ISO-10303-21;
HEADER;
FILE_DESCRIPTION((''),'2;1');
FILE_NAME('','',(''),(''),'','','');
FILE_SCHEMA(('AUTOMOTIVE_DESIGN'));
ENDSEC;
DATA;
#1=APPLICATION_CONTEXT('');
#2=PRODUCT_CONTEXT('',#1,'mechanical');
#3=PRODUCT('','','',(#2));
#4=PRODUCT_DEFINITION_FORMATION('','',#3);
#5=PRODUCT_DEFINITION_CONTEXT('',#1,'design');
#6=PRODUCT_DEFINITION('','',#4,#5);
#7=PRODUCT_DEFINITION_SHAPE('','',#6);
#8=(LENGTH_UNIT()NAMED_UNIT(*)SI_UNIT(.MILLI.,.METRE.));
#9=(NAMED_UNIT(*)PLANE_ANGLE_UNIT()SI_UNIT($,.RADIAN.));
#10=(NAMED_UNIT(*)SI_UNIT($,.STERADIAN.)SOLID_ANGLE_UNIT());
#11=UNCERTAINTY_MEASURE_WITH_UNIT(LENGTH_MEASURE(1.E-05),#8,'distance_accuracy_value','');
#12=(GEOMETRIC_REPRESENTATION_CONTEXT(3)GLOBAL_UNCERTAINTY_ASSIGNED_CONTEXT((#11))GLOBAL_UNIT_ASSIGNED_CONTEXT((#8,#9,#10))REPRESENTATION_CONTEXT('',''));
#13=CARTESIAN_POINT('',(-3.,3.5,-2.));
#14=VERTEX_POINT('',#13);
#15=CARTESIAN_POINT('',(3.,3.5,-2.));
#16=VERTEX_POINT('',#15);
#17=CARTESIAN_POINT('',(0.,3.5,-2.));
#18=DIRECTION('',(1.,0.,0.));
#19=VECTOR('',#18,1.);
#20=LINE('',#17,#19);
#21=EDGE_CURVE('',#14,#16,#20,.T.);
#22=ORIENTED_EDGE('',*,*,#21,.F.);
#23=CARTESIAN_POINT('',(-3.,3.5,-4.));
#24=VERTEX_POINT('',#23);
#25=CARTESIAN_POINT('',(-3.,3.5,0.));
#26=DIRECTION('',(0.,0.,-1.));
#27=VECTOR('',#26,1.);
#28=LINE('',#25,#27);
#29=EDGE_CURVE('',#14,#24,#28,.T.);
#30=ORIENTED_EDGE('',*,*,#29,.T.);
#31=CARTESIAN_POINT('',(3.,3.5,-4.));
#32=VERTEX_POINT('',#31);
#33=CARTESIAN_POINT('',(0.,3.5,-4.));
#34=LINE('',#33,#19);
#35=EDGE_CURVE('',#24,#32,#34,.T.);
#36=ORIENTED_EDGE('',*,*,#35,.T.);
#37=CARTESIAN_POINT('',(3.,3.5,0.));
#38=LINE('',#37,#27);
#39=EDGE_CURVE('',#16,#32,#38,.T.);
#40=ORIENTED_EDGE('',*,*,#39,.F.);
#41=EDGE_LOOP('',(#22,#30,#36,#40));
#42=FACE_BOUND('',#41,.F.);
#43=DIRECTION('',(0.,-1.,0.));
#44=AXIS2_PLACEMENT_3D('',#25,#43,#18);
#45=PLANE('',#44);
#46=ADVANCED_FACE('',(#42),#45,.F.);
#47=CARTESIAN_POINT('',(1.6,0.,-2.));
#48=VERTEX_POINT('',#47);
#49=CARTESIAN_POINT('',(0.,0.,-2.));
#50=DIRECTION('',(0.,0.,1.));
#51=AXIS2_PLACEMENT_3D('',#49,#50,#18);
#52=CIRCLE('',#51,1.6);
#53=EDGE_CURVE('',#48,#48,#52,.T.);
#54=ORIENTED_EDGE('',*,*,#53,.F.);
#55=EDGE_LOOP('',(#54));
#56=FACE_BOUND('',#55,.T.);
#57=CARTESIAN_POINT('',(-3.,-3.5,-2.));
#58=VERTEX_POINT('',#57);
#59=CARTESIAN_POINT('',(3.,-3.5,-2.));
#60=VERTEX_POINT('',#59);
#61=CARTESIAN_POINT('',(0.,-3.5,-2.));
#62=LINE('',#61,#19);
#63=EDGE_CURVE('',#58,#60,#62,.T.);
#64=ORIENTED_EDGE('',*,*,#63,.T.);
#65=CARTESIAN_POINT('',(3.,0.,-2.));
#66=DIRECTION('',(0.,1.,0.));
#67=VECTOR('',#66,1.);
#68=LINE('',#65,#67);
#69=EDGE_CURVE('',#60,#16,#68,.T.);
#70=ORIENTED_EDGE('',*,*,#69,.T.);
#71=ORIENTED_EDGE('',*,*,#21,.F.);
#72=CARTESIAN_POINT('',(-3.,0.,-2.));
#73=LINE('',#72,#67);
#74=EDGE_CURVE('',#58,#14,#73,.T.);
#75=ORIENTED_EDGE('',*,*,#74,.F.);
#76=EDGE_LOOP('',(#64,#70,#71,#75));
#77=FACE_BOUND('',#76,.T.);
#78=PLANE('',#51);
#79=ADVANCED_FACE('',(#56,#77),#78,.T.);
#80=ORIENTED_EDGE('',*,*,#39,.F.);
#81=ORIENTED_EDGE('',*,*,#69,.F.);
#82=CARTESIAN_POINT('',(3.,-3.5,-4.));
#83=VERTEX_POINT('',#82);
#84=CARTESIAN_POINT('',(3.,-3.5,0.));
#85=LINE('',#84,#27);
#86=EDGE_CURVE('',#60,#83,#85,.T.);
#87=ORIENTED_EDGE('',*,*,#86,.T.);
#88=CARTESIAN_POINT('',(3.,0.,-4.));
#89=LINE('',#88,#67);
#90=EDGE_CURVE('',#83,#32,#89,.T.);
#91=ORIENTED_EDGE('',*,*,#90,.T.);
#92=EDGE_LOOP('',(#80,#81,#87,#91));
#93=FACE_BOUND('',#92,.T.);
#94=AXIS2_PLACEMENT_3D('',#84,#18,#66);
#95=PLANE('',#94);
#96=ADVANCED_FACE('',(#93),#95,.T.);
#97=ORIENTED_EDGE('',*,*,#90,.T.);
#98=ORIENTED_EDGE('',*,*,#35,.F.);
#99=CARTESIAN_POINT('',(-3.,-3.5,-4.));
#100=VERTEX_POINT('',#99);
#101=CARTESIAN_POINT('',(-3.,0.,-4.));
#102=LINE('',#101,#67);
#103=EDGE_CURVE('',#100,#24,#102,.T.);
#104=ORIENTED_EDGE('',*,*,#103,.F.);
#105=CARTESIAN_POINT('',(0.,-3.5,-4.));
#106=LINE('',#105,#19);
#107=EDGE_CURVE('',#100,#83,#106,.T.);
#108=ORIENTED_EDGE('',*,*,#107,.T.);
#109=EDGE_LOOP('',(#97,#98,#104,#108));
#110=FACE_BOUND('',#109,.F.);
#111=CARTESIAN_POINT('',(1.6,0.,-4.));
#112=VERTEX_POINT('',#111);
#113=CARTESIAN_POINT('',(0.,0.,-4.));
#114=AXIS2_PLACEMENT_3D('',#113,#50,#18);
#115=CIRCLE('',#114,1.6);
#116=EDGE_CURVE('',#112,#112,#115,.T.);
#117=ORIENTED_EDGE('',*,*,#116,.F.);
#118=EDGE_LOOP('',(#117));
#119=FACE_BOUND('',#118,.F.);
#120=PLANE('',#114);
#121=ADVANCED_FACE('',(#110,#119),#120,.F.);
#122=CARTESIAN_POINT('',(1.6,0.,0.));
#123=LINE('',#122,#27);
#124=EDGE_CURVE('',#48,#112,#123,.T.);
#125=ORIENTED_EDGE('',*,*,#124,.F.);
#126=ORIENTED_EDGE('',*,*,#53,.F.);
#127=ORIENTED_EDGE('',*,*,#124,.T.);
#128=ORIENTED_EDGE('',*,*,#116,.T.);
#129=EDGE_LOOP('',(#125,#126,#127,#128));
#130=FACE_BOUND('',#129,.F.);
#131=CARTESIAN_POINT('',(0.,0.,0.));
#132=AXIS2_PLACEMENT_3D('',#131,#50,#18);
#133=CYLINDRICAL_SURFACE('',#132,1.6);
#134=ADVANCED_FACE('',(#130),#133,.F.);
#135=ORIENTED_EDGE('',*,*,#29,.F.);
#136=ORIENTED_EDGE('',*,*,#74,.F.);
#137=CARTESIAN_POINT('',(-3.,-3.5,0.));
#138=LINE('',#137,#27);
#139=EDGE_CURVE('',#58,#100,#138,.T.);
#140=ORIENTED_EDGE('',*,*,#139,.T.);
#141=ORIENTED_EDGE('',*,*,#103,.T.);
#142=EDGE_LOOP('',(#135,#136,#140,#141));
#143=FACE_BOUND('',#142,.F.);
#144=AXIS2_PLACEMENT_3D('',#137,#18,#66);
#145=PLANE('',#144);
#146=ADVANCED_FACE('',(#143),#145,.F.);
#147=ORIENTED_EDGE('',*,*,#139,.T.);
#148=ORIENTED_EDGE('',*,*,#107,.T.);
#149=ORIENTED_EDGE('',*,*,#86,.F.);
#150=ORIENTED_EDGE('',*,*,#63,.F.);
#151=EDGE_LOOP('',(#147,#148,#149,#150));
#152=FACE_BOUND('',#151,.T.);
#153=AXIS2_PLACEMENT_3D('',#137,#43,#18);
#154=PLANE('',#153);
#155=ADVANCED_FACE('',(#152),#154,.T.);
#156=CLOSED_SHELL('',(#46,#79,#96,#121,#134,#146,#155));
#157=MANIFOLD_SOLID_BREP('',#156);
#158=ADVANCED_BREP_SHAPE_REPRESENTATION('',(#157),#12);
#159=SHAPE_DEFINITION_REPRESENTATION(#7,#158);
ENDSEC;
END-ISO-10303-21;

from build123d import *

# Parameters (mm, degrees)
F0_W     = 6
F0_H     = 7
F0_R     = 1.6
F1_DEPTH = 4
F2_DEPTH = 2


# Not quite as in the source:
# - a feature names something its author has since deleted; it is built from what else it names


with BuildPart() as f1:
    # F0 (on Top) → F1 (new body)
    with BuildSketch(Plane.XY):
        Rectangle(F0_W, F0_H)
        Circle(F0_R, mode=Mode.SUBTRACT)
    extrude(amount=-F1_DEPTH)

    # F0 (on Top) → F2 (cut)
    with BuildSketch(Plane.XY):
        Rectangle(F0_W, F0_H)
        Circle(F0_R, mode=Mode.SUBTRACT)
    extrude(amount=-F2_DEPTH, mode=Mode.SUBTRACT)


solid = f1.part
